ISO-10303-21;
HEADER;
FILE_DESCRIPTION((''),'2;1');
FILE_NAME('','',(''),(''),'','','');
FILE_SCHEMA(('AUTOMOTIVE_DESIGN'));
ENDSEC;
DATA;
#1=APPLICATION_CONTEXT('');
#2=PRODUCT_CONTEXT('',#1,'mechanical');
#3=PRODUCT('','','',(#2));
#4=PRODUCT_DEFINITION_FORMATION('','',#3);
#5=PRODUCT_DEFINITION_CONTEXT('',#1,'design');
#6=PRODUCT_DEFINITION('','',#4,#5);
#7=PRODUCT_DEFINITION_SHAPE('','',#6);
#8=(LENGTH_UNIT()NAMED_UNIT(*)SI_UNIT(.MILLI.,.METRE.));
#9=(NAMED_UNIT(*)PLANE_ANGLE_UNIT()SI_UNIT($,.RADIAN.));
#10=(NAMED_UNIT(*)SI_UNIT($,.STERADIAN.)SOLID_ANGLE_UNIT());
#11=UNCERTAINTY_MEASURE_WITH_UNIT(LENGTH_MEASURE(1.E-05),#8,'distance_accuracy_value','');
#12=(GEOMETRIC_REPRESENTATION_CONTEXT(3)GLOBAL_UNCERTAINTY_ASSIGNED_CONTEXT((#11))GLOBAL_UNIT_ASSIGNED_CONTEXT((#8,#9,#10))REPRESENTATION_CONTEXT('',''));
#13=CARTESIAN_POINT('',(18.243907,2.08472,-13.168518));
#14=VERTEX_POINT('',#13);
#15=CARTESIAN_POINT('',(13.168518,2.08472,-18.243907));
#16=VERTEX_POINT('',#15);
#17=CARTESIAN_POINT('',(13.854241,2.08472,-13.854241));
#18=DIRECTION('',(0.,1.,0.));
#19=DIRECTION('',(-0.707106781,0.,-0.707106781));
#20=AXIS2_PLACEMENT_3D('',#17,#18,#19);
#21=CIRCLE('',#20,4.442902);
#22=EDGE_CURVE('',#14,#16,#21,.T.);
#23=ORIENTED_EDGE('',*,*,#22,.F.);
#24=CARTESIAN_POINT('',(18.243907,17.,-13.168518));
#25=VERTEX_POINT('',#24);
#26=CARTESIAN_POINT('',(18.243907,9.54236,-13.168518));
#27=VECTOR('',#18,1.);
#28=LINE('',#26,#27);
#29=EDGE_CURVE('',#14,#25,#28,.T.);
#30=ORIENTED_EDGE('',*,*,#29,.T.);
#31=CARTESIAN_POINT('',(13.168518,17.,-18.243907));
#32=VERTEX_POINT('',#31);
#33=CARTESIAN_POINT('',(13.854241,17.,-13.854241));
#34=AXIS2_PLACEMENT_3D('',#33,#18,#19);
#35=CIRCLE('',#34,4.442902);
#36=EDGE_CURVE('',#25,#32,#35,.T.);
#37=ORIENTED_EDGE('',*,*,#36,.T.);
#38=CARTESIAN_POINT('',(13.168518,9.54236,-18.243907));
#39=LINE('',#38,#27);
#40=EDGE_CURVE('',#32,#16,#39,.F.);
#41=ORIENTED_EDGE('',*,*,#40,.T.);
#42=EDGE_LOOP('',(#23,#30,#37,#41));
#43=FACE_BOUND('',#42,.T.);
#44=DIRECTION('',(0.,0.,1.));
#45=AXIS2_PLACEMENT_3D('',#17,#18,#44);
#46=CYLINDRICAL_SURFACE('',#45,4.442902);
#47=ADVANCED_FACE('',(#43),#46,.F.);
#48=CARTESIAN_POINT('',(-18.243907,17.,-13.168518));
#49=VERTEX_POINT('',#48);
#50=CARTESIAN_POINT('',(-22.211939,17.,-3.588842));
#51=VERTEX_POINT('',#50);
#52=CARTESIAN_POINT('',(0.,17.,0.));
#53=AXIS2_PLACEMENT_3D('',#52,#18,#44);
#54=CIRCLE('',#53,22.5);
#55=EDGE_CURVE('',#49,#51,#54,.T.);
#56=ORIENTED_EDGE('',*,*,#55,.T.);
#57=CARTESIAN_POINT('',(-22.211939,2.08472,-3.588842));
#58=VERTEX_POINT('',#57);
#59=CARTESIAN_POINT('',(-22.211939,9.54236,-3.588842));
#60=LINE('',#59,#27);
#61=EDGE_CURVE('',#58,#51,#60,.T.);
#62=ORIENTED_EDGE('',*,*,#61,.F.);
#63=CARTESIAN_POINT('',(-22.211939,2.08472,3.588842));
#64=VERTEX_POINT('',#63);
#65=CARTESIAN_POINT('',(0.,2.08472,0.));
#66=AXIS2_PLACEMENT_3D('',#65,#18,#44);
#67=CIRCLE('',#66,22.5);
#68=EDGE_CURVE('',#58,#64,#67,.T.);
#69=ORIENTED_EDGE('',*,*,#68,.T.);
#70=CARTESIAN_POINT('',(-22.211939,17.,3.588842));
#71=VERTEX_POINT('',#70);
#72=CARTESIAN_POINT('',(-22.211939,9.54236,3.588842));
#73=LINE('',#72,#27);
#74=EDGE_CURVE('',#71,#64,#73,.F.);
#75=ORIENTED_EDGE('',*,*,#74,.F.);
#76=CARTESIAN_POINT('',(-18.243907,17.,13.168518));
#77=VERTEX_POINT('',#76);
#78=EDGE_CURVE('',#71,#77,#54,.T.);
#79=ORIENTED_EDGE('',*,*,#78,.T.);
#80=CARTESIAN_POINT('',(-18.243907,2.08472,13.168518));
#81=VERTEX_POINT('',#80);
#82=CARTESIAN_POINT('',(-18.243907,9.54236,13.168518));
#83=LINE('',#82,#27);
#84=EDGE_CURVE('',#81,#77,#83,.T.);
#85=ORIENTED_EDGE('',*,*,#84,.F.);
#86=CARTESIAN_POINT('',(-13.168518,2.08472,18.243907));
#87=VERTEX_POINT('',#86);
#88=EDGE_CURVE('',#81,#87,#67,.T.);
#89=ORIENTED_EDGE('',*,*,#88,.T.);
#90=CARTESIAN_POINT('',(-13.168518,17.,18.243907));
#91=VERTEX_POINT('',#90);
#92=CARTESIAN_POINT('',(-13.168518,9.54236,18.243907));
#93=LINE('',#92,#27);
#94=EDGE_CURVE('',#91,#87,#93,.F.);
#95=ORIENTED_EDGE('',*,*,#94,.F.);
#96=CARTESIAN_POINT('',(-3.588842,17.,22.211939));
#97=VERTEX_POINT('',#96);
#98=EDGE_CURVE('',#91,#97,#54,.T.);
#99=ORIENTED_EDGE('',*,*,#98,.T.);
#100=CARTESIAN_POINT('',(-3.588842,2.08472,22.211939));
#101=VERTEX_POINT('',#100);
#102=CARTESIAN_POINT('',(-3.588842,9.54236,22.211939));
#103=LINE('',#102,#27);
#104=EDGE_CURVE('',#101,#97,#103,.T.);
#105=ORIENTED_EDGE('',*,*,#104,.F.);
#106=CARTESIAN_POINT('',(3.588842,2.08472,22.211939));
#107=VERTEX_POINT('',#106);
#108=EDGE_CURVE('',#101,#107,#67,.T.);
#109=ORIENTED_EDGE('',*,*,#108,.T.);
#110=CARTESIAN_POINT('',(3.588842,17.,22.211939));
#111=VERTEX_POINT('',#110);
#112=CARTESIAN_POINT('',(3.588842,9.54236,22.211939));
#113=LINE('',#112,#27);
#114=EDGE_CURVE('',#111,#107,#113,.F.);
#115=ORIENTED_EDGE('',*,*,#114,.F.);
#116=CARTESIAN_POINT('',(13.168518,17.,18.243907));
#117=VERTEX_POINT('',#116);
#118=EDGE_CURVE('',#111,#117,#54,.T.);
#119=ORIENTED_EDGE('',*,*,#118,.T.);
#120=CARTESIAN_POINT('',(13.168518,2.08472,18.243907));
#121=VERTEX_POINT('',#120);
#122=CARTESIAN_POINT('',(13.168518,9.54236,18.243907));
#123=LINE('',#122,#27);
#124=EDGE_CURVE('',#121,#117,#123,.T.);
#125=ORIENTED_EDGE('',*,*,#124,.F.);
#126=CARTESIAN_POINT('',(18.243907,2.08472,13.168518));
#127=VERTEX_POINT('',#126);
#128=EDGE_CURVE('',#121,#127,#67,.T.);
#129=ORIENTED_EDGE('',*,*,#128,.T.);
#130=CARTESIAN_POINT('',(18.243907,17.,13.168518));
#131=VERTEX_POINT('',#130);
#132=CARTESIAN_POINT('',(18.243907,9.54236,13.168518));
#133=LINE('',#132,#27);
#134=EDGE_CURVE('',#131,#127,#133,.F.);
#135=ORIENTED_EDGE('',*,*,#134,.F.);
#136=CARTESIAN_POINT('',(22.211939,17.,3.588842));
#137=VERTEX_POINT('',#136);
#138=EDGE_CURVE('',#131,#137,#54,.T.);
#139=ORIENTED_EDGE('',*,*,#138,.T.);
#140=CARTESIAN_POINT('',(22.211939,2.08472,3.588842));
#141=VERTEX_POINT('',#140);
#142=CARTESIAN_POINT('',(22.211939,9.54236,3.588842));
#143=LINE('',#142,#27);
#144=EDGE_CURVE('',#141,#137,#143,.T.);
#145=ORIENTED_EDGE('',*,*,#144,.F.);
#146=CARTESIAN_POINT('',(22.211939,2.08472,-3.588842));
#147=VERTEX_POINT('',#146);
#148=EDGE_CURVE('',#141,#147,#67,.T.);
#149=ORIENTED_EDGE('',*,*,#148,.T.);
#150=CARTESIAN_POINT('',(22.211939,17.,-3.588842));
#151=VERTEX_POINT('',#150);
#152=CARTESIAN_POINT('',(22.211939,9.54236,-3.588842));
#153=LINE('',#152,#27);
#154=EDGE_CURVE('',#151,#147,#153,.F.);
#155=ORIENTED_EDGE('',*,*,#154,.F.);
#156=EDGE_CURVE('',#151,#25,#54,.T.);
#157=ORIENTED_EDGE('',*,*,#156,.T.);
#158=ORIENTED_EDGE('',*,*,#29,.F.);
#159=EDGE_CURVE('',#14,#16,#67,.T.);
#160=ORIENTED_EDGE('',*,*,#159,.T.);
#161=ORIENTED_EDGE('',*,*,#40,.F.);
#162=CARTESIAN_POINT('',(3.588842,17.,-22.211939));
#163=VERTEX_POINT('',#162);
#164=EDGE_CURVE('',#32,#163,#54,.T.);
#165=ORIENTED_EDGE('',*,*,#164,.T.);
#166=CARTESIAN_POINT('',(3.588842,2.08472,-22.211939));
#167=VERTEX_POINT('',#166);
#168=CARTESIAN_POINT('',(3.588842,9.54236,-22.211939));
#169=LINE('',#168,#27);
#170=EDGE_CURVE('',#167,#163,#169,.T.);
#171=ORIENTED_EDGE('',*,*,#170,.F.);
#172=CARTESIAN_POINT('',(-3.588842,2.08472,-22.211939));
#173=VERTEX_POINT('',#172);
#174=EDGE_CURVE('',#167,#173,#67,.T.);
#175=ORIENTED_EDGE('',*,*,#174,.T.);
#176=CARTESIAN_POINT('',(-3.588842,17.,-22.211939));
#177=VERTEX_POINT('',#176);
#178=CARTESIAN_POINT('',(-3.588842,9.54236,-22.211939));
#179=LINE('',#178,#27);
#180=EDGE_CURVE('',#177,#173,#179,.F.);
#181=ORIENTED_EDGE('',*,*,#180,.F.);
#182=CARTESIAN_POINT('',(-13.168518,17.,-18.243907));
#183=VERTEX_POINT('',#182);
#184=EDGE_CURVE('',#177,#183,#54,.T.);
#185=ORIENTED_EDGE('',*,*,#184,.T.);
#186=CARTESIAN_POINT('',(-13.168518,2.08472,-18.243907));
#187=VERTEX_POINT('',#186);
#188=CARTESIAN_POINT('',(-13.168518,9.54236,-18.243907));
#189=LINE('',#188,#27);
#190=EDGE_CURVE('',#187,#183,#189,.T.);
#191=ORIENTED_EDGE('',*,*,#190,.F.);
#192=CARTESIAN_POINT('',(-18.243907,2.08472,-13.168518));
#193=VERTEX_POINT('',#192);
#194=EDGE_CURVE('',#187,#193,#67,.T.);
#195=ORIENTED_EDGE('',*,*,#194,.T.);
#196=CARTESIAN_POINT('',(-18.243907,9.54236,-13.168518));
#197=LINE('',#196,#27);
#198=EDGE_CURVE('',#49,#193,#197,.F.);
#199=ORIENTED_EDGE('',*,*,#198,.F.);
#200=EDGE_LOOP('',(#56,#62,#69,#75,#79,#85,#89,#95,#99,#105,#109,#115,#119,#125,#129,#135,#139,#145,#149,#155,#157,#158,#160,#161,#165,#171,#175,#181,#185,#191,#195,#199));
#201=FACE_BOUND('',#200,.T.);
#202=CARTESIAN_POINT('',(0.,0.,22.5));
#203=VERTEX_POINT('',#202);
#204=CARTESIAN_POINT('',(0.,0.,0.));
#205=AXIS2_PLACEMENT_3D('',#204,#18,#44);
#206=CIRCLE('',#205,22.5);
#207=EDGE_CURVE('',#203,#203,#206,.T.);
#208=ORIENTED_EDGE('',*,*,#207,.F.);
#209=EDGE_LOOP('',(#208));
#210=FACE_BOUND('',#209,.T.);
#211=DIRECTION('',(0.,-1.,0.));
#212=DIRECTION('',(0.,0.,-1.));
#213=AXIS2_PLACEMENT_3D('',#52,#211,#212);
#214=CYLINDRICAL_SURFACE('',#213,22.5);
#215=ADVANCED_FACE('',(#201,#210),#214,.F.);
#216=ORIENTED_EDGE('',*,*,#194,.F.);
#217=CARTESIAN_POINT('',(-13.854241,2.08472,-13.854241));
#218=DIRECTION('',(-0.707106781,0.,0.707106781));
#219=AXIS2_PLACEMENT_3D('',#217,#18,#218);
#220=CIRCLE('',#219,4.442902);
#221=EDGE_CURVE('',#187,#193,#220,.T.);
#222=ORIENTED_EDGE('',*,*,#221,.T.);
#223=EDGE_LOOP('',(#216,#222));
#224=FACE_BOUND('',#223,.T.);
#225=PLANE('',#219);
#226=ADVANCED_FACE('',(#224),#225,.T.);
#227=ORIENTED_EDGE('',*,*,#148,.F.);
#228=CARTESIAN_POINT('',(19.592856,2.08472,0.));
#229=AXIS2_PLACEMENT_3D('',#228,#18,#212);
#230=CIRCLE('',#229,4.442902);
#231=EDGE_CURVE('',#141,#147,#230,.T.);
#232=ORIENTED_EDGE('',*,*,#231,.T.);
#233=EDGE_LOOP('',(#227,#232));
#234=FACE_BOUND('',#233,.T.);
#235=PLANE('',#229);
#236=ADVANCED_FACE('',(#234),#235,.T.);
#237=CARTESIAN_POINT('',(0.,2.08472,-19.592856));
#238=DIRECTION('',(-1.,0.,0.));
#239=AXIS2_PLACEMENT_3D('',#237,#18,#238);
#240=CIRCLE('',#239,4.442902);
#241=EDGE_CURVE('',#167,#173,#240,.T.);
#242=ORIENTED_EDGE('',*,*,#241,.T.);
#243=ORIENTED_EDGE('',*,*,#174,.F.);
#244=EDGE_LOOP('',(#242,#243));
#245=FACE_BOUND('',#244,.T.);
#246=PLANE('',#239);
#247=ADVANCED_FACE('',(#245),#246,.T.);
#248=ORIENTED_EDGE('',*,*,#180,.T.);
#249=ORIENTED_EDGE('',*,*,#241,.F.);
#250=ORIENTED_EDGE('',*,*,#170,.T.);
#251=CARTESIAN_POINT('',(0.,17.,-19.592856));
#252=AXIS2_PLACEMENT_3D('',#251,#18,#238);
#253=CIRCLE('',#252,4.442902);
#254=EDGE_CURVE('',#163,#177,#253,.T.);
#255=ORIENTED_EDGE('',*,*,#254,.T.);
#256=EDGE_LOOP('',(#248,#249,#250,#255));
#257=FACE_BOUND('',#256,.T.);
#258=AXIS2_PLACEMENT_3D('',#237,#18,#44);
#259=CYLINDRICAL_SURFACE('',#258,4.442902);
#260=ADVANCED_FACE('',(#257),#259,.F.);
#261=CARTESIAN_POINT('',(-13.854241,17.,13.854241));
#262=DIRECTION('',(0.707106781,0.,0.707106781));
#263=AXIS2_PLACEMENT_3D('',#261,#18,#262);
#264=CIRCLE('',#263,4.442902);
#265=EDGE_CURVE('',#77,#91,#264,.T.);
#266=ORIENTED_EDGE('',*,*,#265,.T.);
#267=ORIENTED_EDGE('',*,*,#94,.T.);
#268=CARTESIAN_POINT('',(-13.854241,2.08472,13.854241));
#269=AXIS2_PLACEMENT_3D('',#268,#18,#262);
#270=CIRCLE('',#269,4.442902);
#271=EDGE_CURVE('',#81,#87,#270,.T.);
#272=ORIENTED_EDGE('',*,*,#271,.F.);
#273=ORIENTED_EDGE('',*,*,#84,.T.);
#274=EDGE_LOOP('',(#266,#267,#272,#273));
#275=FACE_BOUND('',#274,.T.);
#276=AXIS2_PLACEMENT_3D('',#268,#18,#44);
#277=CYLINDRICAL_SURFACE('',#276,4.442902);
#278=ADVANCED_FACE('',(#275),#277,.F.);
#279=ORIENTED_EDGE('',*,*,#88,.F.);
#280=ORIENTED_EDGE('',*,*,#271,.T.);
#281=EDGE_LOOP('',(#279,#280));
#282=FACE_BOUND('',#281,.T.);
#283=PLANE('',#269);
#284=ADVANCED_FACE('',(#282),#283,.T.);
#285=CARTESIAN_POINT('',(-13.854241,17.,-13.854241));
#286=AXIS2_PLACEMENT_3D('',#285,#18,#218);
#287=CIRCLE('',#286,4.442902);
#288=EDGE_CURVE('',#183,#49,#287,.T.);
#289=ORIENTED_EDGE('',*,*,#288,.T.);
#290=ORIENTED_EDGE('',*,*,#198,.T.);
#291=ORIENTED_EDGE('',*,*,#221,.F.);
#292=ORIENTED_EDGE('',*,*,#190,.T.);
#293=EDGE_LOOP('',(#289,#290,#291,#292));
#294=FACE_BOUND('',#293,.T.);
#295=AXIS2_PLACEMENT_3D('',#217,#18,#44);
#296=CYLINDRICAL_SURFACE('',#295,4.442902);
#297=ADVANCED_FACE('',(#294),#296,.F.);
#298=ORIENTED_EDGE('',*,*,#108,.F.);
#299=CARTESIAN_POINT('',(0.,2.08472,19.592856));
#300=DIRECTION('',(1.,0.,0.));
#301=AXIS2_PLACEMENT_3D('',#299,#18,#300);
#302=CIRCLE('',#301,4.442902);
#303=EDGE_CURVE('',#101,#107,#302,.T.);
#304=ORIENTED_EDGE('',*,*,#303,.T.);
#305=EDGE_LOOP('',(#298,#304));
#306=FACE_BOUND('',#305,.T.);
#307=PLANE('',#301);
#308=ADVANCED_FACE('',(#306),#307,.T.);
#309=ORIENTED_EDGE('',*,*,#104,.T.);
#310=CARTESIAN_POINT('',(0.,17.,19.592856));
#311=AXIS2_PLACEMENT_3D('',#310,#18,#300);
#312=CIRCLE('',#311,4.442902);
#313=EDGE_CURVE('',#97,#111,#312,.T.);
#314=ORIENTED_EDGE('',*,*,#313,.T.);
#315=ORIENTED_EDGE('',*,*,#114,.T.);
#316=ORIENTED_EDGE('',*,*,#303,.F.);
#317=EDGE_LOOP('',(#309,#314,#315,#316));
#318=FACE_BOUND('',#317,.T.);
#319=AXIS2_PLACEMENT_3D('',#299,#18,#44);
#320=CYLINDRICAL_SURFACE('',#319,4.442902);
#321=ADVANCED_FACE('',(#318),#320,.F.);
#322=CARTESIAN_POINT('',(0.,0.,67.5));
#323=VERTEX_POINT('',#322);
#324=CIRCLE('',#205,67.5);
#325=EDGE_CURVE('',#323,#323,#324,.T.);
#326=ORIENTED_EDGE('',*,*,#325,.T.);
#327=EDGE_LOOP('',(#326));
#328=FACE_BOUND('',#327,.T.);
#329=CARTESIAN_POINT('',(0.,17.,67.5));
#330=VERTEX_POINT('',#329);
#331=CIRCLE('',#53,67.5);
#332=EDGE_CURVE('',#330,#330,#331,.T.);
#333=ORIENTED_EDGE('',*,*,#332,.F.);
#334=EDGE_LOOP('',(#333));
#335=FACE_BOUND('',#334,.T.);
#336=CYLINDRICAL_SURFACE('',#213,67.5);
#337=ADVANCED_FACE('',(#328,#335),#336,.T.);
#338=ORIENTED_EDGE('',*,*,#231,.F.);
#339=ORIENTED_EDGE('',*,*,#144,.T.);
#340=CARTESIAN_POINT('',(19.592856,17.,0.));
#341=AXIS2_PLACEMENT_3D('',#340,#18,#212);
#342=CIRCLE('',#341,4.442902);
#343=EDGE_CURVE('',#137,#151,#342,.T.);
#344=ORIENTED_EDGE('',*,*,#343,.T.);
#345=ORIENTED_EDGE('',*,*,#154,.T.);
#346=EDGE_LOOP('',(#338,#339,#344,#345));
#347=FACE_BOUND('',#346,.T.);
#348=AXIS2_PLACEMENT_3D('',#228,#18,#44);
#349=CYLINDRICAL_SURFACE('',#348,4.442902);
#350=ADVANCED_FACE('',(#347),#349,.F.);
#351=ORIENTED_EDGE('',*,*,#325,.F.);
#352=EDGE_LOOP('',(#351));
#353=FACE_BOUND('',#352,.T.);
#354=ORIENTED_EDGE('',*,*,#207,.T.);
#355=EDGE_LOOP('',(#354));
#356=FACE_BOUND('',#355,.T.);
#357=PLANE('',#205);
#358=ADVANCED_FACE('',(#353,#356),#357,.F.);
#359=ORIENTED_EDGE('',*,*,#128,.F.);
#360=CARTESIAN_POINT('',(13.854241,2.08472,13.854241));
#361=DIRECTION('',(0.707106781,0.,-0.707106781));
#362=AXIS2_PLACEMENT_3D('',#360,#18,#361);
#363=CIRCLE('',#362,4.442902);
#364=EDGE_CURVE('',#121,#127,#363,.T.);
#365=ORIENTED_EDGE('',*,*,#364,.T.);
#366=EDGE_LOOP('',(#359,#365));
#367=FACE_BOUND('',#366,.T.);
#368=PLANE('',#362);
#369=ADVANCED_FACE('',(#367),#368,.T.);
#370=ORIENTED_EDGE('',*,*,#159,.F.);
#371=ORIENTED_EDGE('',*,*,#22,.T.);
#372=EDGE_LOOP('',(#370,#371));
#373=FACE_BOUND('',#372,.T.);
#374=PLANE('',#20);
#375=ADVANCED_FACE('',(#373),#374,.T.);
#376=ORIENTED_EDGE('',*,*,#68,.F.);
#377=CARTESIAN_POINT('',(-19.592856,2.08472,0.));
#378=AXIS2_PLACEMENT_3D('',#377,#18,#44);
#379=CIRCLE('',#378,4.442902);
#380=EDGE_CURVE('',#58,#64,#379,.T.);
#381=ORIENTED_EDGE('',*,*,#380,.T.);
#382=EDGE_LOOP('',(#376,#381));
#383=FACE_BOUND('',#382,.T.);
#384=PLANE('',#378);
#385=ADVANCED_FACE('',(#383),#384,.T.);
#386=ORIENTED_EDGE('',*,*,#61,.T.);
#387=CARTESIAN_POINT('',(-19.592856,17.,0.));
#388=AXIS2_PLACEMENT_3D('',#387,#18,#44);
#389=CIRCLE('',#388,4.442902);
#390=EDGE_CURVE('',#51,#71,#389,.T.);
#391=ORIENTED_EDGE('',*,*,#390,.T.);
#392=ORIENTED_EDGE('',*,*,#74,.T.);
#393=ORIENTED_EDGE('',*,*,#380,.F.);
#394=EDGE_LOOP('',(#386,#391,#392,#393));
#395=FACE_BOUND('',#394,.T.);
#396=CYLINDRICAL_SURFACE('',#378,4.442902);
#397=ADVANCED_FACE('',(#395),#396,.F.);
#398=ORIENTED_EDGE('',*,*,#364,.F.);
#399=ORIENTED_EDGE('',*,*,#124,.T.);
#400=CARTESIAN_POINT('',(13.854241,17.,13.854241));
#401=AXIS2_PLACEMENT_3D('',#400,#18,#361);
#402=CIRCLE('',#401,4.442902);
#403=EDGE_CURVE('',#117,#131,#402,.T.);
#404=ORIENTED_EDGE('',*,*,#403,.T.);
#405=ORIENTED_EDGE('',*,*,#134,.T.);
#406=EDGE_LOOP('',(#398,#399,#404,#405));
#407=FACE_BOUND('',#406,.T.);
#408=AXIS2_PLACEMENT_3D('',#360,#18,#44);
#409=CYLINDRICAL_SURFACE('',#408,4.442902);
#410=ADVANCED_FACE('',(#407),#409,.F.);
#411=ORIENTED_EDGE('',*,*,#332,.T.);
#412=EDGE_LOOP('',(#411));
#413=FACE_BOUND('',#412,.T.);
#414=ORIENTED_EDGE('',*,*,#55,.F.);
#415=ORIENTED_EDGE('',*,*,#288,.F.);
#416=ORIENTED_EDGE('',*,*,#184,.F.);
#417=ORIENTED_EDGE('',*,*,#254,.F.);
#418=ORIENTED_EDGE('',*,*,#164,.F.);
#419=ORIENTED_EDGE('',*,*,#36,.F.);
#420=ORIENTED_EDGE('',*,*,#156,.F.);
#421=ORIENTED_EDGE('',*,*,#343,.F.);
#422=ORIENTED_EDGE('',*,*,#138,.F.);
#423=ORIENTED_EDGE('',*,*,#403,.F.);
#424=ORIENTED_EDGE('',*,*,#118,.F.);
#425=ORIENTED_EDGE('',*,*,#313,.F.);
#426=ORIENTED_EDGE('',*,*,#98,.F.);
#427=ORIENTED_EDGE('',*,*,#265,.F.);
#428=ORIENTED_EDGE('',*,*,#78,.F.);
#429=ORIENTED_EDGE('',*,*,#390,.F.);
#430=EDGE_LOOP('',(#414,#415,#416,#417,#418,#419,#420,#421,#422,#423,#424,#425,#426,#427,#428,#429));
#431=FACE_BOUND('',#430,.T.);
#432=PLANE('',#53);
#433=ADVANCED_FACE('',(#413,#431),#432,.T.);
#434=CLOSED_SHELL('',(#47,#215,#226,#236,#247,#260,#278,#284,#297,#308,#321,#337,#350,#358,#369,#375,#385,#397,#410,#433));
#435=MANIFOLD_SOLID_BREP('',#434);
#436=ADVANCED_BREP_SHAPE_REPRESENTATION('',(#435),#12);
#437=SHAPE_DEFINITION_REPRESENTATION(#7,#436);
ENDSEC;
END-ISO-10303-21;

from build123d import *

# Parameters (mm, degrees)
SKETCH1_R           = 67.5
BOSS_EXTRUDE1_DEPTH = 17
SKETCH2_R           = 22.5
CUT_EXTRUDE1_DEPTH  = 97.961332499
SKETCH3_R           = 4.442902141
CUT_EXTRUDE2_DEPTH  = 14.915280347
CIRPATTERN1_COUNT   = 8


with BuildPart() as part:
    # Sketch1 → Boss-Extrude1 (new body)
    with BuildSketch(Plane(origin=(0, 0, 0), x_dir=(1, 0, 0), z_dir=(0, 1, 0))):
        Circle(SKETCH1_R)
    extrude(amount=BOSS_EXTRUDE1_DEPTH)

    # Sketch2 → Cut-Extrude1 (cut, through all)
    with BuildSketch(Plane(origin=(0, 0, 0), x_dir=(1, 0, 0), z_dir=(0, 1, 0))):
        Circle(SKETCH2_R)
    extrude(amount=CUT_EXTRUDE1_DEPTH, mode=Mode.SUBTRACT)

    # Sketch3 → Cut-Extrude2 (cut)
    with BuildSketch(Plane(origin=(0, 17, 0), x_dir=(1, 0, 0), z_dir=(0, 1, 0))):
        with Locations((-19.592855779, 0)):
            Circle(SKETCH3_R)
    cut_extrude2 = extrude(amount=-CUT_EXTRUDE2_DEPTH, mode=Mode.SUBTRACT)

    # CirPattern1: Cut-Extrude2 ×8 about axis
    cirpattern1_axis = Axis((0, 0, 0), (0, 1, 0))
    for i in range(1, CIRPATTERN1_COUNT):
        add(cut_extrude2.rotate(cirpattern1_axis, i * 360 / CIRPATTERN1_COUNT), mode=Mode.SUBTRACT)


solid = part.part
